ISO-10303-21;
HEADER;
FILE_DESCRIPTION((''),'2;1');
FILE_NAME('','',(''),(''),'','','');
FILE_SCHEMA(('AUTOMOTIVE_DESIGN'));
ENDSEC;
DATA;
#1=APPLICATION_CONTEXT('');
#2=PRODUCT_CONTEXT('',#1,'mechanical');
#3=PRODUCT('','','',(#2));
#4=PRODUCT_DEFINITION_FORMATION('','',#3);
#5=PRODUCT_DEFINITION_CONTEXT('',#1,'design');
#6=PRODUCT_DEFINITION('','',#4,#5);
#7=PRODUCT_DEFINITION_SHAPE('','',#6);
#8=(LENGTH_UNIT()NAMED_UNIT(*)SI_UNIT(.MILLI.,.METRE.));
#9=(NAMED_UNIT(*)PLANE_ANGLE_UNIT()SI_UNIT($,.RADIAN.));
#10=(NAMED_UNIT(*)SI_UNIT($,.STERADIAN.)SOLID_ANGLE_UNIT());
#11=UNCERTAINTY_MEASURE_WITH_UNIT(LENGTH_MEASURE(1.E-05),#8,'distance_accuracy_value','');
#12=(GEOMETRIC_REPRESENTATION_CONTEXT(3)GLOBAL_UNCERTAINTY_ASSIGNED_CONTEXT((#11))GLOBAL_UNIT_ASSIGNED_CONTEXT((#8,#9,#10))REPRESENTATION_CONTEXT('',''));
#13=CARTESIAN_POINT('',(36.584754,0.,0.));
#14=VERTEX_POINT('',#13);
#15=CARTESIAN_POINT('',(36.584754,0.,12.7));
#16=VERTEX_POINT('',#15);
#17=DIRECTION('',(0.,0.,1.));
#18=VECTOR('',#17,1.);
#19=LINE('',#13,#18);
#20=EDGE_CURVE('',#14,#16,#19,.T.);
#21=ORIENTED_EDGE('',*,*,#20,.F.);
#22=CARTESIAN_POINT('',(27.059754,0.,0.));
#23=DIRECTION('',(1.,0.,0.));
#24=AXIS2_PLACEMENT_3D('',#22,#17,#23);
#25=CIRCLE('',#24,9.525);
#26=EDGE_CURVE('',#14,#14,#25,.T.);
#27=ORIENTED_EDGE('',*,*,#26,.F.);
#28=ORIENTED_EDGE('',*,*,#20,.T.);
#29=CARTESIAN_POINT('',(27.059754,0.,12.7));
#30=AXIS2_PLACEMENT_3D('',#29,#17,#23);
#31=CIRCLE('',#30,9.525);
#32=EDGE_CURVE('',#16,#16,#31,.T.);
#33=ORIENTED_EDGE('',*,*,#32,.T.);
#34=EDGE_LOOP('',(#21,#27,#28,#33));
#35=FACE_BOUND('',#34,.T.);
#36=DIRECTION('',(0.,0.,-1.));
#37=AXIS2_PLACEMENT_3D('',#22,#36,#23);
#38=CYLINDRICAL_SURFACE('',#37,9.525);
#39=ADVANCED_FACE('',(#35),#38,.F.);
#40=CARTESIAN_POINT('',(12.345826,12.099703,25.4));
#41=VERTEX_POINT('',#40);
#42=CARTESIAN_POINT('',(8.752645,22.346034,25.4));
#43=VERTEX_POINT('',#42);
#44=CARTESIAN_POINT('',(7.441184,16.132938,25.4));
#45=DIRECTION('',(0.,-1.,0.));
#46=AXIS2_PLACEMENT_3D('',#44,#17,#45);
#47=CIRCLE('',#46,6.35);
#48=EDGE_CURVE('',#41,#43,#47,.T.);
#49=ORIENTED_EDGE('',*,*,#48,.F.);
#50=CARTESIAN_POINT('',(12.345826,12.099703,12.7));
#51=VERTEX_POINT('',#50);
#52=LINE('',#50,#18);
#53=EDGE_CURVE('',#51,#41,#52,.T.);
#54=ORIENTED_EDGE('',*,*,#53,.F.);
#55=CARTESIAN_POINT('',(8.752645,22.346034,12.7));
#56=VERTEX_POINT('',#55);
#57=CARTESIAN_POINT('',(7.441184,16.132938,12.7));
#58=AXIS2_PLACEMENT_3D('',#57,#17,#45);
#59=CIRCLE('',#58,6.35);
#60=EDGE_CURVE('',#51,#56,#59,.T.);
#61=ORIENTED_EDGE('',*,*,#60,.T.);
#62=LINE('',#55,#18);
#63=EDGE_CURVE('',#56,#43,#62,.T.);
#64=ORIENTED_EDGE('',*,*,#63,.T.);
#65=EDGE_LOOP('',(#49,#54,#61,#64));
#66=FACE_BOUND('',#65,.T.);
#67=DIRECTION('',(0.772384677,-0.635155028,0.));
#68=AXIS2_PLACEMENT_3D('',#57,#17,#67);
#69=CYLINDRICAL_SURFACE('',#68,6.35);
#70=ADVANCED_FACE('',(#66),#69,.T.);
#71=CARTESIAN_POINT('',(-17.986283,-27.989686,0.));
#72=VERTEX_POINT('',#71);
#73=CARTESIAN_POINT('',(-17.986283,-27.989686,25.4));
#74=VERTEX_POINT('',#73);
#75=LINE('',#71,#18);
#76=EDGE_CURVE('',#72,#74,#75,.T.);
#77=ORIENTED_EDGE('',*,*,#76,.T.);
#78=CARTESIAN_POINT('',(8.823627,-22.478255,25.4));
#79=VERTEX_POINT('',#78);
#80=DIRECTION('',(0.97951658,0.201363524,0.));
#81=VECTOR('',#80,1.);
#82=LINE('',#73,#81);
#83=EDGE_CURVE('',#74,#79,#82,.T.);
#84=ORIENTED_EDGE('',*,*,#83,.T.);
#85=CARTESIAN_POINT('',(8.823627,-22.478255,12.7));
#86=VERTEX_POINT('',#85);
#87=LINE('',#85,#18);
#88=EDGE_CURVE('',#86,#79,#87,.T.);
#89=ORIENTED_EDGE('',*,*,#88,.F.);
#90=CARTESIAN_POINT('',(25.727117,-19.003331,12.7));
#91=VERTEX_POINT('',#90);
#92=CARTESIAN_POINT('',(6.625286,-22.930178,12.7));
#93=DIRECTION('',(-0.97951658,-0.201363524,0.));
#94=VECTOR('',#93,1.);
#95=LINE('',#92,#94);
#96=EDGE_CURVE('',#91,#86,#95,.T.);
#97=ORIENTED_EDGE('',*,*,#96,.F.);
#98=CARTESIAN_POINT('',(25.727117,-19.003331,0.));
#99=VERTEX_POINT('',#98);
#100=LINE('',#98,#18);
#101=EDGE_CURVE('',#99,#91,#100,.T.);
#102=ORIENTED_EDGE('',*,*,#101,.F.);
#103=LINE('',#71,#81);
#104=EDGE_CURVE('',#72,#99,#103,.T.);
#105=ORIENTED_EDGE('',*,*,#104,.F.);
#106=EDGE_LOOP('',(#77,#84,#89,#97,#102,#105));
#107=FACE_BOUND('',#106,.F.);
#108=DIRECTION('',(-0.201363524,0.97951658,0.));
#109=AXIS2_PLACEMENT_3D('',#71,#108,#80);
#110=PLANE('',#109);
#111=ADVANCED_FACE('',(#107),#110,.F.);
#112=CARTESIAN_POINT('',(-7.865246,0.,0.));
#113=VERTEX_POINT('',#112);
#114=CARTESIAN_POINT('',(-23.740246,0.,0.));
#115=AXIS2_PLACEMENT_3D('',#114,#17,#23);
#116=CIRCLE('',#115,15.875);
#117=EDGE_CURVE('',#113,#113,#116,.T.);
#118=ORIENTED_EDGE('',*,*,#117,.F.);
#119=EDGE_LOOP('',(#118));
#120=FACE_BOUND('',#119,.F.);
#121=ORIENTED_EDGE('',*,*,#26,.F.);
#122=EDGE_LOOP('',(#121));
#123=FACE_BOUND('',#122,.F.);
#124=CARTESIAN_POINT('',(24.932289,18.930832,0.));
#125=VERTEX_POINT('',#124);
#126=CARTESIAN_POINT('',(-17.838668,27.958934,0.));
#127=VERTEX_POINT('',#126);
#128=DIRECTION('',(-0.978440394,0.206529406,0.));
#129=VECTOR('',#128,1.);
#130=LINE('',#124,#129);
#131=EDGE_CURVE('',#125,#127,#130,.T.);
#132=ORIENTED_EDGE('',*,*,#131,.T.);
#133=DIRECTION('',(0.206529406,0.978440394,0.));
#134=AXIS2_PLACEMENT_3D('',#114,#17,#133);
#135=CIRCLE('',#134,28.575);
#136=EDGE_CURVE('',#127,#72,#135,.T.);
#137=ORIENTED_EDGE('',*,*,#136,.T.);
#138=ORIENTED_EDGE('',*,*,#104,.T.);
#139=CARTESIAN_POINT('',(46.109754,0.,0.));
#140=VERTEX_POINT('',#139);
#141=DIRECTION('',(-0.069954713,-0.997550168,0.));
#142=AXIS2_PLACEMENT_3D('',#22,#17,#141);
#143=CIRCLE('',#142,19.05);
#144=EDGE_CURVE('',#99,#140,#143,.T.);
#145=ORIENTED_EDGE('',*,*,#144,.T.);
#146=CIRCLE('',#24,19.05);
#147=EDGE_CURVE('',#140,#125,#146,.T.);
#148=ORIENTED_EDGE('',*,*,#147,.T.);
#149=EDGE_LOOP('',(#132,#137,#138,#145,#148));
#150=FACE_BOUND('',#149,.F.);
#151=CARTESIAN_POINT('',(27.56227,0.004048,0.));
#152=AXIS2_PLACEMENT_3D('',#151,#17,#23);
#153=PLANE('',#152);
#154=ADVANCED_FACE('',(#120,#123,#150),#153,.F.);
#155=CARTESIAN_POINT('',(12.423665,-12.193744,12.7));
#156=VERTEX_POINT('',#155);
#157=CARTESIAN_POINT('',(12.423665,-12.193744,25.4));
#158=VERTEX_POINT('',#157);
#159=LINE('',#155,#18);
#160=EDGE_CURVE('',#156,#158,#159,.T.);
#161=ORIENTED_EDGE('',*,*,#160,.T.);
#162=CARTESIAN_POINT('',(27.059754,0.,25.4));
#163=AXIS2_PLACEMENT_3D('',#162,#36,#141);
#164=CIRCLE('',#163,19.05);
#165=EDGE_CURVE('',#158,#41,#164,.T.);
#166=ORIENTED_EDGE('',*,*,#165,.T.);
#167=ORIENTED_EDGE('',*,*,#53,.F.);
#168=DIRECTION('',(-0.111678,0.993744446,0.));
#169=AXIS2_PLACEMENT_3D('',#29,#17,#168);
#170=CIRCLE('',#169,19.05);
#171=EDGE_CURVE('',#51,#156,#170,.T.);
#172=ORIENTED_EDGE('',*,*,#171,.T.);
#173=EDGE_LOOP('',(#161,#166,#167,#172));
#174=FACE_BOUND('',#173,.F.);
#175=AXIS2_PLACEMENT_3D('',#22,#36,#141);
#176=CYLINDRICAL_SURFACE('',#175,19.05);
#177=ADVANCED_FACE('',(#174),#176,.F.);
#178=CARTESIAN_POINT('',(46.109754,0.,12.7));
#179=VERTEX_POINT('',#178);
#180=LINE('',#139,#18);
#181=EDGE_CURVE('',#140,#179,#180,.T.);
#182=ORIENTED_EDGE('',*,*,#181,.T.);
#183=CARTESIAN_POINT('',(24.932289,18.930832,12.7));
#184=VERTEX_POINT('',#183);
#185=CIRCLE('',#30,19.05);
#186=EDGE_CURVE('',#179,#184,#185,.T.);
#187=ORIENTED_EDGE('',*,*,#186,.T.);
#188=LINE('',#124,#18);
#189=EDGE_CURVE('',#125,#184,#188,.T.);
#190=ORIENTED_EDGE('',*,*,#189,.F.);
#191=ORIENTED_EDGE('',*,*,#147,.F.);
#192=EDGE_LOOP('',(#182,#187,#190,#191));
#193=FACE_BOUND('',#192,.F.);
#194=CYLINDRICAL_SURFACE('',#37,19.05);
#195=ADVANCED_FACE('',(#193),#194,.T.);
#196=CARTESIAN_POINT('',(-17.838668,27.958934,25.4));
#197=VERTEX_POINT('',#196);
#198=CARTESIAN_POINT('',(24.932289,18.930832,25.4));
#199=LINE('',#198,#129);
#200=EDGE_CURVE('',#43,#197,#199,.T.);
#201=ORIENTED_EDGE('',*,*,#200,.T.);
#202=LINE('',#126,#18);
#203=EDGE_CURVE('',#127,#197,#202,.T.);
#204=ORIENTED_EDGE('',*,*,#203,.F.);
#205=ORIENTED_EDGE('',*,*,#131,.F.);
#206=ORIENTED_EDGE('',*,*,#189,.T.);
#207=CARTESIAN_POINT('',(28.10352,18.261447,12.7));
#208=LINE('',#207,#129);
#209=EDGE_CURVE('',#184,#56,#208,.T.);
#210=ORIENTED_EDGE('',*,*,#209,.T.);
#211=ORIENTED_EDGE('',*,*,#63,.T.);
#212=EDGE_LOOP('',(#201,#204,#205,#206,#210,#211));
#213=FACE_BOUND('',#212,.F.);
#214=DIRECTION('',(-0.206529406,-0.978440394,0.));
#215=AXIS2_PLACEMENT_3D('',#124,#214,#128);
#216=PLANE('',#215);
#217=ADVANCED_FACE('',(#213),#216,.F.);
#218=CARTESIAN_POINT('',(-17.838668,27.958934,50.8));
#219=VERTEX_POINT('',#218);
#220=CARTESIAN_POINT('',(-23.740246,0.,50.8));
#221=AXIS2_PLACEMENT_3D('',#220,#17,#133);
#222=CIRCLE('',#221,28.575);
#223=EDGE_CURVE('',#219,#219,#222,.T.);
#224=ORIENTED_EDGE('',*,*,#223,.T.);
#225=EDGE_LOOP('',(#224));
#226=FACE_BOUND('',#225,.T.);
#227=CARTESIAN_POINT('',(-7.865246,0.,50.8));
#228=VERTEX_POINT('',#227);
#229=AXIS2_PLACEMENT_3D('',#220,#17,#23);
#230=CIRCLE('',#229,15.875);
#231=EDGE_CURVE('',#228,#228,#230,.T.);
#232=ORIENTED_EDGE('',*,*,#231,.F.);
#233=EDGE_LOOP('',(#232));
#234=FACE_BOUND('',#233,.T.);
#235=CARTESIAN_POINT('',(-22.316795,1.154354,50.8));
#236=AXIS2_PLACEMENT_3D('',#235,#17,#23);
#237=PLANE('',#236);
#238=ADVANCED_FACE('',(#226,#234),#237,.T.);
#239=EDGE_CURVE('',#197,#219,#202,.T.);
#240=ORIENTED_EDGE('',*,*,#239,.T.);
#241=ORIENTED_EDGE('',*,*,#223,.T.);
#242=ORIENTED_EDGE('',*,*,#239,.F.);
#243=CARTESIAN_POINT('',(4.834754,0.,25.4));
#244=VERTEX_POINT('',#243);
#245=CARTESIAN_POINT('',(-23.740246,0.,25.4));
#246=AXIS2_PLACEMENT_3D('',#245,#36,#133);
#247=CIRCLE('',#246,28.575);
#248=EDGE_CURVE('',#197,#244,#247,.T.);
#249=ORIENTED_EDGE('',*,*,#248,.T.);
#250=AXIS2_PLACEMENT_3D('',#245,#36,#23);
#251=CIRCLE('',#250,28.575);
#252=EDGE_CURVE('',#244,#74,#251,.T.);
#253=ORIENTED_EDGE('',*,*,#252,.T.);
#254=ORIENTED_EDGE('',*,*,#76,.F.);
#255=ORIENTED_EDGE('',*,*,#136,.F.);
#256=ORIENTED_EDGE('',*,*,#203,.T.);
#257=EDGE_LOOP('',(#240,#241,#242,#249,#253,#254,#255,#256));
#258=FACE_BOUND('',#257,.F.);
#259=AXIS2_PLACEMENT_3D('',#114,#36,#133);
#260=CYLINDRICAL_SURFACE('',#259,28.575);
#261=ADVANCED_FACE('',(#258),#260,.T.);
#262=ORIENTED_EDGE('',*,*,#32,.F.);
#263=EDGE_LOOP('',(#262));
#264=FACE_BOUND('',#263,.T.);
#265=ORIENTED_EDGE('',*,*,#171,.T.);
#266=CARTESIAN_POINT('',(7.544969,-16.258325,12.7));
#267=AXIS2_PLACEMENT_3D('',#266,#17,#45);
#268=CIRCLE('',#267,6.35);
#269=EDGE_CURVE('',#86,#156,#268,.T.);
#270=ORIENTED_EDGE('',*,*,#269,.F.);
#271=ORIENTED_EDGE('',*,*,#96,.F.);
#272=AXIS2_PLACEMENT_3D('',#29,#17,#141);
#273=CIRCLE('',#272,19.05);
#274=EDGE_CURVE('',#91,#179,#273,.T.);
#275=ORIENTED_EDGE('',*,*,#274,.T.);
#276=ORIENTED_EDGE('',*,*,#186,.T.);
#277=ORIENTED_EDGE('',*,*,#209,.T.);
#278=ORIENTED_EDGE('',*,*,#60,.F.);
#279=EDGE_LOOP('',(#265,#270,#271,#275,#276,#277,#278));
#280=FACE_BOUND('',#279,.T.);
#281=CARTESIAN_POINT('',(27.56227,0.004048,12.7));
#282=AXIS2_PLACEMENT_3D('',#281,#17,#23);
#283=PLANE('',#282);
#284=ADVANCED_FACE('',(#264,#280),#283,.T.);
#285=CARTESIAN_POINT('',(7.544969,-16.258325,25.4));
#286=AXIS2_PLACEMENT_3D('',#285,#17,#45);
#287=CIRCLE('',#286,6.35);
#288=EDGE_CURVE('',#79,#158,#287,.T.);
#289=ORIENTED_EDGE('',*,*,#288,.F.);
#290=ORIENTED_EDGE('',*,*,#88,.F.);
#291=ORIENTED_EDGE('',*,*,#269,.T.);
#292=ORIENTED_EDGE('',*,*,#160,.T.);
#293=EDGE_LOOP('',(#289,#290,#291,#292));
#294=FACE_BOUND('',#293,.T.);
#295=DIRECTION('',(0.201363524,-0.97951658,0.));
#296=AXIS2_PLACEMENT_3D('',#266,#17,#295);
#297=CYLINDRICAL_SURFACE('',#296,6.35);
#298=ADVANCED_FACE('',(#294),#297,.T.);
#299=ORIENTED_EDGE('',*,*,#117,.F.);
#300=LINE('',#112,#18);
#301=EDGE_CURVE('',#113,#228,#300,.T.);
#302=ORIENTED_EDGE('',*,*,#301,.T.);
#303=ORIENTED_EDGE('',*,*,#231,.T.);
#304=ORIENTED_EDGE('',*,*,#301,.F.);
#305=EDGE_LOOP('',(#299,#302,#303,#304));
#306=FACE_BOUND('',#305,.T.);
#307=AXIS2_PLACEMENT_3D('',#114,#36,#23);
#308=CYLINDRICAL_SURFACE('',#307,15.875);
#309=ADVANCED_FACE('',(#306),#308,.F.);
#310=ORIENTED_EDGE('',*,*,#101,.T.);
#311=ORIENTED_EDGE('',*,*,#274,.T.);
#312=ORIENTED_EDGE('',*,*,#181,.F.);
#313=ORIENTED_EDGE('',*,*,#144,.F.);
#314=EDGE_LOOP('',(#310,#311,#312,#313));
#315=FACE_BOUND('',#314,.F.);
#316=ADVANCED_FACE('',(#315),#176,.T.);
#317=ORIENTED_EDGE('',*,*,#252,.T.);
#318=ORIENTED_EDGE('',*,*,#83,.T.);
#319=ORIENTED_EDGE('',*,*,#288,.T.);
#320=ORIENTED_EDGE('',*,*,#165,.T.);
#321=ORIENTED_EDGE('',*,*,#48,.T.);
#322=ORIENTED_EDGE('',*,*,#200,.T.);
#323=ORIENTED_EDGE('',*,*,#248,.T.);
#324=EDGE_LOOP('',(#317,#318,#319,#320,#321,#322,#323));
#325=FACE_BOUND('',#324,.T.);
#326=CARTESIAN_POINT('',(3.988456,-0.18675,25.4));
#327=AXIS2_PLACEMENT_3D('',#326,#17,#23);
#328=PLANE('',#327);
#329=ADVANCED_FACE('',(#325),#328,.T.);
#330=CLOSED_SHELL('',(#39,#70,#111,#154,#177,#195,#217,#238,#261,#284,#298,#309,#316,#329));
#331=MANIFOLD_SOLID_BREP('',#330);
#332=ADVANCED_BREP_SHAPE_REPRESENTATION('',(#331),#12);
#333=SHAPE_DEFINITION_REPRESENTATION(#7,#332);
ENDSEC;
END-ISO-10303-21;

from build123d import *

# Parameters (mm, degrees)
F0_R     = 15.875
F1_DEPTH = 50.8
F2_DEPTH = 25.4
F0_R_2   = 9.525
F3_DEPTH = 12.7
F4_R     = 6.35


with BuildPart() as f1:
    # F0 (on Top) → F1 (new body)
    with BuildSketch(Plane.XY):
        with BuildLine():
            ThreePointArc((4.8347544076, 0), (-1.5460097383, 17.998514379), (-17.8386678043, 27.9589342538))
            ThreePointArc((-17.8386678043, 27.9589342538), (-52.3151461351, 0.07539214), (-17.9862828844, -27.9896862818))
            ThreePointArc((-17.9862828844, -27.9896862818), (-1.5935741791, -18.0570088971), (4.8347544076, 0))
        make_face()
        with Locations((-23.7402455924, 0)):
            Circle(F0_R, mode=Mode.SUBTRACT)
    extrude(amount=F1_DEPTH)

    # F0 (on Top) → F2 (join)
    with BuildSketch(Plane.XY):
        with BuildLine():
            ThreePointArc((25.7271171156, -19.0033307041), (8.0139347128, -0.3990640994), (24.9322885076, 18.9308316998))
            Line((24.9322885076, 18.9308316998), (-17.8386678043, 27.9589342538))
            ThreePointArc((-17.8386678043, 27.9589342538), (-1.5460097383, 17.998514379), (4.8347544076, 0))
            ThreePointArc((4.8347544076, 0), (-1.5935741791, -18.0570088971), (-17.9862828844, -27.9896862818))
            Line((-17.9862828844, -27.9896862818), (25.7271171156, -19.0033307041))
        make_face()
    extrude(amount=F2_DEPTH)

    # F0 (on Top) → F3 (join)
    with BuildSketch(Plane.XY):
        with BuildLine():
            ThreePointArc((25.7271171156, -19.0033307041), (40.0504387542, -13.9335788729), (46.1097544076, 0))
            ThreePointArc((46.1097544076, 0), (39.7557040492, 14.2026533682), (24.9322885076, 18.9308316998))
            ThreePointArc((24.9322885076, 18.9308316998), (8.0139347128, -0.3990640994), (25.7271171156, -19.0033307041))
        make_face()
        with Locations((27.0597544076, 0)):
            Circle(F0_R_2, mode=Mode.SUBTRACT)
    extrude(amount=F3_DEPTH)

    # F4
    f4_edges = [f1.edges().sort_by_distance(p)[0] for p in [
        (25.727117, -19.003331, 19.05),
        (24.932289, 18.930832, 19.05),
    ]]
    fillet(f4_edges, radius=F4_R)


solid = f1.part
